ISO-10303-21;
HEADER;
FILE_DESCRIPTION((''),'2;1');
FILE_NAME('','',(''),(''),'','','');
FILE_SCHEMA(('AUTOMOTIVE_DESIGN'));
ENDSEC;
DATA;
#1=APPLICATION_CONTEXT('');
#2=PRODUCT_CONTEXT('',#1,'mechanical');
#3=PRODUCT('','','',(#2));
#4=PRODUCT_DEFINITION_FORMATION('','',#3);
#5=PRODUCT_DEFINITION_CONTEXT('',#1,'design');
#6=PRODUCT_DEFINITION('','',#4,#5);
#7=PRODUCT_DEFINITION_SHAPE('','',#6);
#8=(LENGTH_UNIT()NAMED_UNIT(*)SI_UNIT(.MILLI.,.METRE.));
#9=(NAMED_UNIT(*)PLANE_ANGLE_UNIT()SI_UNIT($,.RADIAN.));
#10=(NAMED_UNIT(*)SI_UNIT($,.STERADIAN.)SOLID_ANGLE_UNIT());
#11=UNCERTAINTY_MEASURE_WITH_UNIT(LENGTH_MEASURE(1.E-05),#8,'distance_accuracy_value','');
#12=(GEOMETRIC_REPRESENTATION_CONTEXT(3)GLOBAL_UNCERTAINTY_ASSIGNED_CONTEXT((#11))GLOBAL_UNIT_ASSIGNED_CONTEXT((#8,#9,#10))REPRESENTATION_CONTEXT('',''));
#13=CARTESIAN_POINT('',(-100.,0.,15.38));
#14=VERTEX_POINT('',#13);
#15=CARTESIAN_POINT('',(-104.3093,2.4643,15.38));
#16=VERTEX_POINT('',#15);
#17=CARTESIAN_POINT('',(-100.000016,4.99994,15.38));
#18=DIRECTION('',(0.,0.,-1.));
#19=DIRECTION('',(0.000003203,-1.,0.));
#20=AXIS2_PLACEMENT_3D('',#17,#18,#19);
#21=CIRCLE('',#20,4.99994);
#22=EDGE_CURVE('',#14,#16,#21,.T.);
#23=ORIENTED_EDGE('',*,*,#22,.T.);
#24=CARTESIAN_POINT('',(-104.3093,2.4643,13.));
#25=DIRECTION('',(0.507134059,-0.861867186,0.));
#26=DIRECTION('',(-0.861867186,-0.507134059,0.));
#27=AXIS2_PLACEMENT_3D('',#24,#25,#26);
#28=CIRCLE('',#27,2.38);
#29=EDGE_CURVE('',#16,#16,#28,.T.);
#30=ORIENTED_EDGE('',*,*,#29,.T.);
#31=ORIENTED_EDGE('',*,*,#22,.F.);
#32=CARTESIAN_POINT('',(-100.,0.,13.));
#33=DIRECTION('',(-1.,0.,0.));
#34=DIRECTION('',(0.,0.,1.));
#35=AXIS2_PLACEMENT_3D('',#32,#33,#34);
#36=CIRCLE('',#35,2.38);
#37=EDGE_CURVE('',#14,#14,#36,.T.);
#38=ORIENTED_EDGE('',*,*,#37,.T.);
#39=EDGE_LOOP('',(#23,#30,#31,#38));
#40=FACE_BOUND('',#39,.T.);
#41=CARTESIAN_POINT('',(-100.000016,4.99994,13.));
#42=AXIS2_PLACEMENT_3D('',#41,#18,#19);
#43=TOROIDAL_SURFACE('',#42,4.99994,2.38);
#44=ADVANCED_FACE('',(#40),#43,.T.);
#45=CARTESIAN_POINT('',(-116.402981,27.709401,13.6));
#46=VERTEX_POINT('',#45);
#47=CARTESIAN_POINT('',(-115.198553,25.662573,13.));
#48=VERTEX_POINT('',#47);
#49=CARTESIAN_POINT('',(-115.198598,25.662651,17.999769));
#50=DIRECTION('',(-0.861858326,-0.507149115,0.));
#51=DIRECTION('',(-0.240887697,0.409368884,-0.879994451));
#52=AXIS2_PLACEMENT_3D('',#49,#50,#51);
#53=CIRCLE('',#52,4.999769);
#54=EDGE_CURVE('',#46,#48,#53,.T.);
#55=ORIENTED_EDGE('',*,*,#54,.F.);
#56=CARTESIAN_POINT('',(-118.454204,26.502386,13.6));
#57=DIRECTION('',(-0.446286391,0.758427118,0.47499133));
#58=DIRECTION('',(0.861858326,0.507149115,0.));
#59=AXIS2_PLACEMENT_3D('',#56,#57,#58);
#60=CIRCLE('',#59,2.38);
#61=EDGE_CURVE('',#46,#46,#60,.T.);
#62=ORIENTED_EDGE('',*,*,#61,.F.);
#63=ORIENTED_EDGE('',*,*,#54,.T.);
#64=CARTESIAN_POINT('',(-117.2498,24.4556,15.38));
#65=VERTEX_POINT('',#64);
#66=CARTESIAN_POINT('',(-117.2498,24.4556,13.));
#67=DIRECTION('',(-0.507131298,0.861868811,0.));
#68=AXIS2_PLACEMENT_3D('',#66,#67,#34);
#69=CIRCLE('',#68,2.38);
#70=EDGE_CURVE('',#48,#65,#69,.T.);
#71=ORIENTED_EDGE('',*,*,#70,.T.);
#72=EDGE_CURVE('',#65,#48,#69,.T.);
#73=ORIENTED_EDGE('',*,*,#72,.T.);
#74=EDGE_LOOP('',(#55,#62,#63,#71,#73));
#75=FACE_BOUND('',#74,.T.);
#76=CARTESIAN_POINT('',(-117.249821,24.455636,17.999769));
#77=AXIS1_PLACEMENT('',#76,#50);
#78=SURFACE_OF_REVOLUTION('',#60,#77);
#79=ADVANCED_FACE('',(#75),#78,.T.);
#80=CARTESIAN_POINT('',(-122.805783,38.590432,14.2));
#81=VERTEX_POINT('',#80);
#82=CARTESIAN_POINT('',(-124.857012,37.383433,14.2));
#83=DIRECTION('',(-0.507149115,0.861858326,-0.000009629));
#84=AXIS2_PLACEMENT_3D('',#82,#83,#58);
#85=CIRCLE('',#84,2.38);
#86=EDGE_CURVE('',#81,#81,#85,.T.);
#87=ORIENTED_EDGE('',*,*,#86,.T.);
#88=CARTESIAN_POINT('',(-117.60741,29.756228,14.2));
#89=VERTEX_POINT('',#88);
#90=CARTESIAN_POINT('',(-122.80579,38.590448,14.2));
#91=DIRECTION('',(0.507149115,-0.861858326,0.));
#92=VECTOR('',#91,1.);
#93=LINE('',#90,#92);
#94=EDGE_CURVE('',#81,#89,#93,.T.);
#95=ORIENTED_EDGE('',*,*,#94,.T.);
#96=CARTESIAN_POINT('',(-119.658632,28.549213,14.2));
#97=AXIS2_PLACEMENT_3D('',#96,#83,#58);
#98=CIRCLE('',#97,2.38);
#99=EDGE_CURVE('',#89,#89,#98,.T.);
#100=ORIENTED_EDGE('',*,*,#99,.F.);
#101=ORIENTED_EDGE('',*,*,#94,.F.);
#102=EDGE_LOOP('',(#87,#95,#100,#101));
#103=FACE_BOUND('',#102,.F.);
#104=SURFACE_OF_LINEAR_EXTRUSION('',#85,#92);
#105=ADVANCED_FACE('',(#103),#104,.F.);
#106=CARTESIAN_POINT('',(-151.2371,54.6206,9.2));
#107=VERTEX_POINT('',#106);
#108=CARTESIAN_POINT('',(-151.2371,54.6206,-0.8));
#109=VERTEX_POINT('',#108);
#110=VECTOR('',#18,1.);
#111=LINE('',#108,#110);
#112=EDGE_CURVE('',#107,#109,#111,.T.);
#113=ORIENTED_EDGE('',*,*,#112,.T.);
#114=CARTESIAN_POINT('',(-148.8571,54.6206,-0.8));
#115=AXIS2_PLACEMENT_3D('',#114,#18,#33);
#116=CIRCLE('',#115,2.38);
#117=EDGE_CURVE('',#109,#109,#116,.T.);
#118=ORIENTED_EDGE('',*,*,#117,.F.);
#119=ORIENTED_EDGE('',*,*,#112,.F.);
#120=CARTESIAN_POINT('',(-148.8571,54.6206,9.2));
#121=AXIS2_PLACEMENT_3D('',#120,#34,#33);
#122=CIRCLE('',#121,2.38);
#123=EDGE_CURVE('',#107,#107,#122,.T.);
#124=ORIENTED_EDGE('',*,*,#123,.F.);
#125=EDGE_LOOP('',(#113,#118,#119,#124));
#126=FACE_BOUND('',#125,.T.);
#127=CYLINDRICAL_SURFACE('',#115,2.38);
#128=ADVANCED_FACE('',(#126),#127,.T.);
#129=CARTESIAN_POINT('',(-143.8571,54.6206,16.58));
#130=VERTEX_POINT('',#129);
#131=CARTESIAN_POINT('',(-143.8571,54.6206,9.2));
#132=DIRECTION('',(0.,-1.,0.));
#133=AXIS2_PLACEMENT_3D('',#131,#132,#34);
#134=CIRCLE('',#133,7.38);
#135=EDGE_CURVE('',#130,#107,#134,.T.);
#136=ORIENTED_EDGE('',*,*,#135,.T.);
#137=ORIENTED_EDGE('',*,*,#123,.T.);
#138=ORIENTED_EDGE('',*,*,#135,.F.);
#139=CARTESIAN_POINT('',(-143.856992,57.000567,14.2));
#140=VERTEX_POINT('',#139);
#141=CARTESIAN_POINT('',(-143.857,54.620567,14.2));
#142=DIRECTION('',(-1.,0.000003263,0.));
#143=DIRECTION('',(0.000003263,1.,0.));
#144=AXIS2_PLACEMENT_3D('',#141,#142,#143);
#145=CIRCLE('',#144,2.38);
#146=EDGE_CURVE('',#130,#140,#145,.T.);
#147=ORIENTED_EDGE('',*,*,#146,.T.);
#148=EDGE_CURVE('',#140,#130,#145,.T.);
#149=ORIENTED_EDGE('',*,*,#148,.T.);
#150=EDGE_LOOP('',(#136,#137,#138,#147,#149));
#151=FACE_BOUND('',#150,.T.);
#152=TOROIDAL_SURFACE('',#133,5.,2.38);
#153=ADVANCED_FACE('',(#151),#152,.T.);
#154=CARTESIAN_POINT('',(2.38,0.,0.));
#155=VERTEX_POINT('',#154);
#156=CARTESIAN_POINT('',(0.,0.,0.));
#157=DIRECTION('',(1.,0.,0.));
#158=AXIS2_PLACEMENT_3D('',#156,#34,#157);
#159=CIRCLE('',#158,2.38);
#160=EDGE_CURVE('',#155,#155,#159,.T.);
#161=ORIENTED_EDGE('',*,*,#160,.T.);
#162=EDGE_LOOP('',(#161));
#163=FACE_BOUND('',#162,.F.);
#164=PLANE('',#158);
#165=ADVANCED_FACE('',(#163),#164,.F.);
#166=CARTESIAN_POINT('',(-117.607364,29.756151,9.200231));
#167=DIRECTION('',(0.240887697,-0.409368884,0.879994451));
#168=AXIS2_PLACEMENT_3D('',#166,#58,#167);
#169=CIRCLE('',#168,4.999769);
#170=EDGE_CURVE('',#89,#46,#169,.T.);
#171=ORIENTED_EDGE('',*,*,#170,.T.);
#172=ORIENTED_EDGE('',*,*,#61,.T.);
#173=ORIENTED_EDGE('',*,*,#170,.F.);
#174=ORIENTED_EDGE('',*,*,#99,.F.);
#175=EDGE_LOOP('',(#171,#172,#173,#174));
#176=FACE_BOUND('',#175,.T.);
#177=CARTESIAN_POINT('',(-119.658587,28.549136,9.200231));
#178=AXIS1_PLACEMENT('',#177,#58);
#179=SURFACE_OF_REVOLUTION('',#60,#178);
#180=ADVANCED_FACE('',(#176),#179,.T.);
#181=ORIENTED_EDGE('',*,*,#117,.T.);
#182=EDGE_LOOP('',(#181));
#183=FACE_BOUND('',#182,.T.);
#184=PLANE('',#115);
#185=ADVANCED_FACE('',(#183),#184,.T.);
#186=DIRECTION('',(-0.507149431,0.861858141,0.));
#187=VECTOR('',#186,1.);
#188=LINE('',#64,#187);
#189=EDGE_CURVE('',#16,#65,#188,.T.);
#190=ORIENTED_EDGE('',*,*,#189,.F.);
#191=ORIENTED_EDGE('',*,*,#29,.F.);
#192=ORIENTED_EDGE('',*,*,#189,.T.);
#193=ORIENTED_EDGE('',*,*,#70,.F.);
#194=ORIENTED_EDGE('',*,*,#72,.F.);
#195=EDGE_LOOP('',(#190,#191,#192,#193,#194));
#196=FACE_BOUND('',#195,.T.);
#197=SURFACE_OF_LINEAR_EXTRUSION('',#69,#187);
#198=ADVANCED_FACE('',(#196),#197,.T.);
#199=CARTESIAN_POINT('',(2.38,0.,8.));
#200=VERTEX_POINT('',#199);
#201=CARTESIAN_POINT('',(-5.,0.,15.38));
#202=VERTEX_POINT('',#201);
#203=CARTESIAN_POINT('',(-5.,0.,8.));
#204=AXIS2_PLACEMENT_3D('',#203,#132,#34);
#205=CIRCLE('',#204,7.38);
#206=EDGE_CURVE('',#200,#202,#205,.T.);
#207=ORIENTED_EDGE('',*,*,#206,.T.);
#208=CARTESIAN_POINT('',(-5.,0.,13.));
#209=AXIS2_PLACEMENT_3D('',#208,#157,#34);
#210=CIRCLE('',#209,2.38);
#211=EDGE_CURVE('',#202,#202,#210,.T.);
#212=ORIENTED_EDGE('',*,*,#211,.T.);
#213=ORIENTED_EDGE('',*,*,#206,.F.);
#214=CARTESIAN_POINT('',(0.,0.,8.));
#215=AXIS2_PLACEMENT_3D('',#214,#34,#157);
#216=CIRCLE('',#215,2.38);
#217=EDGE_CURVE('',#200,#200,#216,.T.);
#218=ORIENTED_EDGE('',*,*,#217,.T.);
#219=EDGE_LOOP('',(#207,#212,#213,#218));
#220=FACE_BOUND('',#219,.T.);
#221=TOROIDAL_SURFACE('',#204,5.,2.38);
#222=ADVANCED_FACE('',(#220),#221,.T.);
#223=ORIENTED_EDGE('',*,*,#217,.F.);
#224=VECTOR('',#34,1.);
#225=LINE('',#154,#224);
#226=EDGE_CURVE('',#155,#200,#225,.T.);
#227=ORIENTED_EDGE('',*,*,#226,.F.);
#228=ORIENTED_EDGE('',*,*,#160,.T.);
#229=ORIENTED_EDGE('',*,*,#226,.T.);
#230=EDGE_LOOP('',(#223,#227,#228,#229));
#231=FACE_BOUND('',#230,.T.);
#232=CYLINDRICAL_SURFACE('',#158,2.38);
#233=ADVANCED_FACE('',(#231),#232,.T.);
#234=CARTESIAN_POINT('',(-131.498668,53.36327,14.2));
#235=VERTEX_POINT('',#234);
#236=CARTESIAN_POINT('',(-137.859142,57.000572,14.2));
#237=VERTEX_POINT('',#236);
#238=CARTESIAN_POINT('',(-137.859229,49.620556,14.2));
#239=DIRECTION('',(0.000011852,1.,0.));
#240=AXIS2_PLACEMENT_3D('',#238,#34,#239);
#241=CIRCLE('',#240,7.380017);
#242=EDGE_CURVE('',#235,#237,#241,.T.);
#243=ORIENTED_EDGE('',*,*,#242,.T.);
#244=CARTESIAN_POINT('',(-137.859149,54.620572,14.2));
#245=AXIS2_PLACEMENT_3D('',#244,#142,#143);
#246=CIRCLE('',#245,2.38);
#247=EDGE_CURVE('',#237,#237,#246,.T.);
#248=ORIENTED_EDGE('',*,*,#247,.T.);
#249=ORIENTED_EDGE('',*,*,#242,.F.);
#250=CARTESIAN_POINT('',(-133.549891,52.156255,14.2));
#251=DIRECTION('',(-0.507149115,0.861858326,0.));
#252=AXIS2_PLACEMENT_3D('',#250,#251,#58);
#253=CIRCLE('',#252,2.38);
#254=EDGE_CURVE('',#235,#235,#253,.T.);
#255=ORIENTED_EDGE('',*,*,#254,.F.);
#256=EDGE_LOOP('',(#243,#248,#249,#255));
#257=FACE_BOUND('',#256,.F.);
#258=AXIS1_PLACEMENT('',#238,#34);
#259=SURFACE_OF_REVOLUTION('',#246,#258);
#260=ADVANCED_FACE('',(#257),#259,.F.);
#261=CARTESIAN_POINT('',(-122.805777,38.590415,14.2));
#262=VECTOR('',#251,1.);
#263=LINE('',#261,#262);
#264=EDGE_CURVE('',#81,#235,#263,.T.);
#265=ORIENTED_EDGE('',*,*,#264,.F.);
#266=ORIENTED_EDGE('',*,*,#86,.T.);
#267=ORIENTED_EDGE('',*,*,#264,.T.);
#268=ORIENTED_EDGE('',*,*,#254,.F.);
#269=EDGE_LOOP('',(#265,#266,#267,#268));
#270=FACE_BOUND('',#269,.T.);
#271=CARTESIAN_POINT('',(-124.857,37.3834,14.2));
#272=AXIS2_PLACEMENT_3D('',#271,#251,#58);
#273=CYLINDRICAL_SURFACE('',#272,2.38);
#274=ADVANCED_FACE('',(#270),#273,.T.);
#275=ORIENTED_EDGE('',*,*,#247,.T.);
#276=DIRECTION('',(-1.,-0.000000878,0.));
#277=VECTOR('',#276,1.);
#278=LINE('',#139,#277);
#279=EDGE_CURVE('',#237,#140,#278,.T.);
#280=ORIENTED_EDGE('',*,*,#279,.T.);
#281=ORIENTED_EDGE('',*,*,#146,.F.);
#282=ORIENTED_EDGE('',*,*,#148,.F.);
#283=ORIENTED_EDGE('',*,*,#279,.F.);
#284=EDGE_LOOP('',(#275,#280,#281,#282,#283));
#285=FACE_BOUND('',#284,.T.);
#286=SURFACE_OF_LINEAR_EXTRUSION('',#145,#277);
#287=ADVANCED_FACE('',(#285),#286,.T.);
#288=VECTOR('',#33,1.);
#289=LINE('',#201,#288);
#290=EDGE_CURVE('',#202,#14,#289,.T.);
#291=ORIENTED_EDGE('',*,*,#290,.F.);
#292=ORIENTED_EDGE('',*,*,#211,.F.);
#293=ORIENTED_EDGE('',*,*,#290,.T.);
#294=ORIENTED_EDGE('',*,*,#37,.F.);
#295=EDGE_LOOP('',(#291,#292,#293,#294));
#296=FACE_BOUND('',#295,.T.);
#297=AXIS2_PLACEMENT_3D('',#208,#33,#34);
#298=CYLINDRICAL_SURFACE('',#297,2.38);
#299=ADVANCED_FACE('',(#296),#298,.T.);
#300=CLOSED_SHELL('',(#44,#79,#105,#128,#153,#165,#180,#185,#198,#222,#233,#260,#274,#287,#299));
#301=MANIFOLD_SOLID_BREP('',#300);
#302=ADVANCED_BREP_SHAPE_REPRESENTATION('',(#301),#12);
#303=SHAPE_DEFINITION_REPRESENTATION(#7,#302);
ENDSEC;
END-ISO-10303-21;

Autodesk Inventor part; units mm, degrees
sketch "Sketch1" plane through (0, 0, 0) normal (0, 0, 1) x (1, 0, 0)
  circle A0 centre (0, 0) radius 2.38
  dimension "d0" = 4.76
sketch "Sketch2" plane through (0, 0, 0) normal (0, 1, 0) x (-1, 0, 0)
  line L0 (0, 0) -> (0, 8)
  line L1 (5, 13) -> (100, 13)
  arc A0 (5, 13) -> (0, 8) centre (5, 8) ccw
  point P0 (0, 13)
  dimension "d1" = 13
  dimension "d2" = 100
  dimension "d3" = 5
sweep "Sweep1" add profiles "Sketch1" path "Sketch2"
ref_plane "Work Plane1" through (-5, 0, 13) normal (0, 0, -1) x (-1, 0, 0)
sketch "Sketch3" plane through (-100, 0, 13) normal (-1, 0, 0) x (0, 0, 1)
  circle A0 centre (0, 0) radius 2.38 projected
  point P0 (-13, 0)
sketch "Sketch4" plane through (-5, 0, 13) normal (0, 0, -1) x (-1, 0, 0)
  arc A0 (95, 0) -> (99.3093, 2.4643) centre (95, 5) ccw
  line L0 (95, 2.38) -> (95, -2.38) projected
  line L1 (-5, -14.1885) -> (-5, 68.471) projected
  line L2 (-34.856, 0) -> (157.476, 0) projected
  line L3 (112.2498, 24.4556) -> (99.3093, 2.4643)
  line L4 (130, 54.6206) -> (126.5299, 56.6625)
  point P0 (-5, 0)
  dimension "d6" = 10
  dimension "d11" = 35
  dimension "d44" = 54.6206
  dimension "d45" = 35
sweep "Sweep2" add profiles "Sketch3" path "Sketch4" path curves A0 L3
ref_plane "Work Plane2" through (-104.3093, 2.4643, 13) normal (-0.8618583, -0.5071491, 0) x (-0.5071491, 0.8618583, 0)
sketch "Sketch5" plane through (-117.2498, 24.4556, 13) normal (-0.5071491, 0.8618583, 0) x (0.8618583, 0.5071491, 0)
  circle A0 centre (0, 0) radius 2.38 projected
  point P0 (88.6501, 13)
sketch "Sketch6" plane through (-104.3093, 2.4643, 13) normal (-0.8618583, -0.5071491, 0) x (-0.5071491, 0.8618583, 0)
  line L0 (67.6152, 13) -> (-122.0784, 13) projected
  line L1 (-122.0784, 13) -> (67.6152, 13) projected
  line L2 (67.6152, 13) -> (-122.0784, 13) projected
  line L3 (0, 2.38) -> (0, -2.38) projected
  arc A0 (27.891, -0.6) -> (25.5161, 0) centre (25.5161, -5) ccw
  line L4 (40.5161, -1.2) -> (30.2659, -1.2)
  arc A1 (27.891, -0.6) -> (30.2659, -1.2) centre (30.2659, 3.8) ccw
  line L5 (25.5161, -5) -> (30.2659, 3.8) construction
  line L6 (25.5161, 2.38) -> (25.5161, -2.38) projected
  line L7 (0, 2.38) -> (0, -2.38) projected
  point P0 (-55.0242, 13)
  point P1 (25.5161, 0)
  dimension "d16" = 10
  dimension "d20" = 10
  dimension "d22" = 1.2
  dimension "d23" = 15
sweep "Sweep3" add profiles "Sketch5" path "Sketch6" path curves A0 A1 L4
sketch "Sketch7" plane through (-124.857, 37.3834, 14.2) normal (-0.5071491, 0.8618583, 0) x (0.8618583, 0.5071491, 0)
  circle A0 centre (0, 0) radius 2.38 projected
  point P0 (88.6501, 14.2)
ref_plane "Work Plane3" through (-119.6586, 28.5492, 14.2) normal (0, 0, -1) x (-0.5071491, 0.8618583, 0)
sketch "Sketch8" plane through (-119.6586, 28.5492, 14.2) normal (0, 0, -1) x (-0.5071491, 0.8618583, 0)
  line L0 (-101.837, 116.7703) -> (5.5426, -65.7126) projected
  line L1 (34.7421, -7.6336) -> (31.7003, -2.4643)
  line L2 (10.2503, 2.38) -> (10.2503, -2.38) projected
  line L3 (10.2503, 0) -> (27.391, 0)
  arc A0 (31.7003, -2.4643) -> (27.391, 0) centre (27.391, -5) ccw
  point P0 (-85.2901, 88.6501)
  point P1 (37.2779, -11.9428)
  dimension "d27" = 5
  dimension "d28" = 5
  dimension "d41" = 27.0276
  dimension "d42" = 11.9428
sweep "Sweep4" add profiles "Sketch7" path "Sketch8" path curves L3 A0 L1
ref_plane "Work Plane4" through (-137.8592, 54.6206, 14.2) normal (0, -1, 0) x (-1, 0, 0)
sketch "Sketch10" plane through (-143.8571, 54.6206, 14.2) normal (-1, 0, 0) x (0, 0, 1)
  circle A0 centre (0, 0) radius 2.38 projected
  point P0 (-14.2, -54.6206)
sketch "Sketch11" plane through (-137.8592, 54.6206, 14.2) normal (0, -1, 0) x (-1, 0, 0)
  line L0 (5.9979, 2.38) -> (5.9979, -2.38) projected
  line L1 (-137.8592, -5.856) -> (-137.8592, 18.476) projected
  line L2 (42.4879, 14.2) -> (-170.6938, 14.2) projected
  line L3 (10.9979, 15) -> (10.9979, 5)
  line L4 (5.9979, 0) -> (5.9979, 0)
  arc A0 (5.9979, 0) -> (10.9979, 5) centre (5.9979, 5) ccw
  point P0 (-137.8592, 14.2)
  dimension "d33" = 5
  dimension "d34" = 15
  dimension "d43" = 5
sweep "Sweep5" add profiles "Sketch10" path "Sketch11" path curves L4 A0 L3
ref_plane "Work Plane5" through (-5, 0, 13) normal (0, -1, 0) x (-1, 0, 0)
properties part number "100-09" material "Steel"
